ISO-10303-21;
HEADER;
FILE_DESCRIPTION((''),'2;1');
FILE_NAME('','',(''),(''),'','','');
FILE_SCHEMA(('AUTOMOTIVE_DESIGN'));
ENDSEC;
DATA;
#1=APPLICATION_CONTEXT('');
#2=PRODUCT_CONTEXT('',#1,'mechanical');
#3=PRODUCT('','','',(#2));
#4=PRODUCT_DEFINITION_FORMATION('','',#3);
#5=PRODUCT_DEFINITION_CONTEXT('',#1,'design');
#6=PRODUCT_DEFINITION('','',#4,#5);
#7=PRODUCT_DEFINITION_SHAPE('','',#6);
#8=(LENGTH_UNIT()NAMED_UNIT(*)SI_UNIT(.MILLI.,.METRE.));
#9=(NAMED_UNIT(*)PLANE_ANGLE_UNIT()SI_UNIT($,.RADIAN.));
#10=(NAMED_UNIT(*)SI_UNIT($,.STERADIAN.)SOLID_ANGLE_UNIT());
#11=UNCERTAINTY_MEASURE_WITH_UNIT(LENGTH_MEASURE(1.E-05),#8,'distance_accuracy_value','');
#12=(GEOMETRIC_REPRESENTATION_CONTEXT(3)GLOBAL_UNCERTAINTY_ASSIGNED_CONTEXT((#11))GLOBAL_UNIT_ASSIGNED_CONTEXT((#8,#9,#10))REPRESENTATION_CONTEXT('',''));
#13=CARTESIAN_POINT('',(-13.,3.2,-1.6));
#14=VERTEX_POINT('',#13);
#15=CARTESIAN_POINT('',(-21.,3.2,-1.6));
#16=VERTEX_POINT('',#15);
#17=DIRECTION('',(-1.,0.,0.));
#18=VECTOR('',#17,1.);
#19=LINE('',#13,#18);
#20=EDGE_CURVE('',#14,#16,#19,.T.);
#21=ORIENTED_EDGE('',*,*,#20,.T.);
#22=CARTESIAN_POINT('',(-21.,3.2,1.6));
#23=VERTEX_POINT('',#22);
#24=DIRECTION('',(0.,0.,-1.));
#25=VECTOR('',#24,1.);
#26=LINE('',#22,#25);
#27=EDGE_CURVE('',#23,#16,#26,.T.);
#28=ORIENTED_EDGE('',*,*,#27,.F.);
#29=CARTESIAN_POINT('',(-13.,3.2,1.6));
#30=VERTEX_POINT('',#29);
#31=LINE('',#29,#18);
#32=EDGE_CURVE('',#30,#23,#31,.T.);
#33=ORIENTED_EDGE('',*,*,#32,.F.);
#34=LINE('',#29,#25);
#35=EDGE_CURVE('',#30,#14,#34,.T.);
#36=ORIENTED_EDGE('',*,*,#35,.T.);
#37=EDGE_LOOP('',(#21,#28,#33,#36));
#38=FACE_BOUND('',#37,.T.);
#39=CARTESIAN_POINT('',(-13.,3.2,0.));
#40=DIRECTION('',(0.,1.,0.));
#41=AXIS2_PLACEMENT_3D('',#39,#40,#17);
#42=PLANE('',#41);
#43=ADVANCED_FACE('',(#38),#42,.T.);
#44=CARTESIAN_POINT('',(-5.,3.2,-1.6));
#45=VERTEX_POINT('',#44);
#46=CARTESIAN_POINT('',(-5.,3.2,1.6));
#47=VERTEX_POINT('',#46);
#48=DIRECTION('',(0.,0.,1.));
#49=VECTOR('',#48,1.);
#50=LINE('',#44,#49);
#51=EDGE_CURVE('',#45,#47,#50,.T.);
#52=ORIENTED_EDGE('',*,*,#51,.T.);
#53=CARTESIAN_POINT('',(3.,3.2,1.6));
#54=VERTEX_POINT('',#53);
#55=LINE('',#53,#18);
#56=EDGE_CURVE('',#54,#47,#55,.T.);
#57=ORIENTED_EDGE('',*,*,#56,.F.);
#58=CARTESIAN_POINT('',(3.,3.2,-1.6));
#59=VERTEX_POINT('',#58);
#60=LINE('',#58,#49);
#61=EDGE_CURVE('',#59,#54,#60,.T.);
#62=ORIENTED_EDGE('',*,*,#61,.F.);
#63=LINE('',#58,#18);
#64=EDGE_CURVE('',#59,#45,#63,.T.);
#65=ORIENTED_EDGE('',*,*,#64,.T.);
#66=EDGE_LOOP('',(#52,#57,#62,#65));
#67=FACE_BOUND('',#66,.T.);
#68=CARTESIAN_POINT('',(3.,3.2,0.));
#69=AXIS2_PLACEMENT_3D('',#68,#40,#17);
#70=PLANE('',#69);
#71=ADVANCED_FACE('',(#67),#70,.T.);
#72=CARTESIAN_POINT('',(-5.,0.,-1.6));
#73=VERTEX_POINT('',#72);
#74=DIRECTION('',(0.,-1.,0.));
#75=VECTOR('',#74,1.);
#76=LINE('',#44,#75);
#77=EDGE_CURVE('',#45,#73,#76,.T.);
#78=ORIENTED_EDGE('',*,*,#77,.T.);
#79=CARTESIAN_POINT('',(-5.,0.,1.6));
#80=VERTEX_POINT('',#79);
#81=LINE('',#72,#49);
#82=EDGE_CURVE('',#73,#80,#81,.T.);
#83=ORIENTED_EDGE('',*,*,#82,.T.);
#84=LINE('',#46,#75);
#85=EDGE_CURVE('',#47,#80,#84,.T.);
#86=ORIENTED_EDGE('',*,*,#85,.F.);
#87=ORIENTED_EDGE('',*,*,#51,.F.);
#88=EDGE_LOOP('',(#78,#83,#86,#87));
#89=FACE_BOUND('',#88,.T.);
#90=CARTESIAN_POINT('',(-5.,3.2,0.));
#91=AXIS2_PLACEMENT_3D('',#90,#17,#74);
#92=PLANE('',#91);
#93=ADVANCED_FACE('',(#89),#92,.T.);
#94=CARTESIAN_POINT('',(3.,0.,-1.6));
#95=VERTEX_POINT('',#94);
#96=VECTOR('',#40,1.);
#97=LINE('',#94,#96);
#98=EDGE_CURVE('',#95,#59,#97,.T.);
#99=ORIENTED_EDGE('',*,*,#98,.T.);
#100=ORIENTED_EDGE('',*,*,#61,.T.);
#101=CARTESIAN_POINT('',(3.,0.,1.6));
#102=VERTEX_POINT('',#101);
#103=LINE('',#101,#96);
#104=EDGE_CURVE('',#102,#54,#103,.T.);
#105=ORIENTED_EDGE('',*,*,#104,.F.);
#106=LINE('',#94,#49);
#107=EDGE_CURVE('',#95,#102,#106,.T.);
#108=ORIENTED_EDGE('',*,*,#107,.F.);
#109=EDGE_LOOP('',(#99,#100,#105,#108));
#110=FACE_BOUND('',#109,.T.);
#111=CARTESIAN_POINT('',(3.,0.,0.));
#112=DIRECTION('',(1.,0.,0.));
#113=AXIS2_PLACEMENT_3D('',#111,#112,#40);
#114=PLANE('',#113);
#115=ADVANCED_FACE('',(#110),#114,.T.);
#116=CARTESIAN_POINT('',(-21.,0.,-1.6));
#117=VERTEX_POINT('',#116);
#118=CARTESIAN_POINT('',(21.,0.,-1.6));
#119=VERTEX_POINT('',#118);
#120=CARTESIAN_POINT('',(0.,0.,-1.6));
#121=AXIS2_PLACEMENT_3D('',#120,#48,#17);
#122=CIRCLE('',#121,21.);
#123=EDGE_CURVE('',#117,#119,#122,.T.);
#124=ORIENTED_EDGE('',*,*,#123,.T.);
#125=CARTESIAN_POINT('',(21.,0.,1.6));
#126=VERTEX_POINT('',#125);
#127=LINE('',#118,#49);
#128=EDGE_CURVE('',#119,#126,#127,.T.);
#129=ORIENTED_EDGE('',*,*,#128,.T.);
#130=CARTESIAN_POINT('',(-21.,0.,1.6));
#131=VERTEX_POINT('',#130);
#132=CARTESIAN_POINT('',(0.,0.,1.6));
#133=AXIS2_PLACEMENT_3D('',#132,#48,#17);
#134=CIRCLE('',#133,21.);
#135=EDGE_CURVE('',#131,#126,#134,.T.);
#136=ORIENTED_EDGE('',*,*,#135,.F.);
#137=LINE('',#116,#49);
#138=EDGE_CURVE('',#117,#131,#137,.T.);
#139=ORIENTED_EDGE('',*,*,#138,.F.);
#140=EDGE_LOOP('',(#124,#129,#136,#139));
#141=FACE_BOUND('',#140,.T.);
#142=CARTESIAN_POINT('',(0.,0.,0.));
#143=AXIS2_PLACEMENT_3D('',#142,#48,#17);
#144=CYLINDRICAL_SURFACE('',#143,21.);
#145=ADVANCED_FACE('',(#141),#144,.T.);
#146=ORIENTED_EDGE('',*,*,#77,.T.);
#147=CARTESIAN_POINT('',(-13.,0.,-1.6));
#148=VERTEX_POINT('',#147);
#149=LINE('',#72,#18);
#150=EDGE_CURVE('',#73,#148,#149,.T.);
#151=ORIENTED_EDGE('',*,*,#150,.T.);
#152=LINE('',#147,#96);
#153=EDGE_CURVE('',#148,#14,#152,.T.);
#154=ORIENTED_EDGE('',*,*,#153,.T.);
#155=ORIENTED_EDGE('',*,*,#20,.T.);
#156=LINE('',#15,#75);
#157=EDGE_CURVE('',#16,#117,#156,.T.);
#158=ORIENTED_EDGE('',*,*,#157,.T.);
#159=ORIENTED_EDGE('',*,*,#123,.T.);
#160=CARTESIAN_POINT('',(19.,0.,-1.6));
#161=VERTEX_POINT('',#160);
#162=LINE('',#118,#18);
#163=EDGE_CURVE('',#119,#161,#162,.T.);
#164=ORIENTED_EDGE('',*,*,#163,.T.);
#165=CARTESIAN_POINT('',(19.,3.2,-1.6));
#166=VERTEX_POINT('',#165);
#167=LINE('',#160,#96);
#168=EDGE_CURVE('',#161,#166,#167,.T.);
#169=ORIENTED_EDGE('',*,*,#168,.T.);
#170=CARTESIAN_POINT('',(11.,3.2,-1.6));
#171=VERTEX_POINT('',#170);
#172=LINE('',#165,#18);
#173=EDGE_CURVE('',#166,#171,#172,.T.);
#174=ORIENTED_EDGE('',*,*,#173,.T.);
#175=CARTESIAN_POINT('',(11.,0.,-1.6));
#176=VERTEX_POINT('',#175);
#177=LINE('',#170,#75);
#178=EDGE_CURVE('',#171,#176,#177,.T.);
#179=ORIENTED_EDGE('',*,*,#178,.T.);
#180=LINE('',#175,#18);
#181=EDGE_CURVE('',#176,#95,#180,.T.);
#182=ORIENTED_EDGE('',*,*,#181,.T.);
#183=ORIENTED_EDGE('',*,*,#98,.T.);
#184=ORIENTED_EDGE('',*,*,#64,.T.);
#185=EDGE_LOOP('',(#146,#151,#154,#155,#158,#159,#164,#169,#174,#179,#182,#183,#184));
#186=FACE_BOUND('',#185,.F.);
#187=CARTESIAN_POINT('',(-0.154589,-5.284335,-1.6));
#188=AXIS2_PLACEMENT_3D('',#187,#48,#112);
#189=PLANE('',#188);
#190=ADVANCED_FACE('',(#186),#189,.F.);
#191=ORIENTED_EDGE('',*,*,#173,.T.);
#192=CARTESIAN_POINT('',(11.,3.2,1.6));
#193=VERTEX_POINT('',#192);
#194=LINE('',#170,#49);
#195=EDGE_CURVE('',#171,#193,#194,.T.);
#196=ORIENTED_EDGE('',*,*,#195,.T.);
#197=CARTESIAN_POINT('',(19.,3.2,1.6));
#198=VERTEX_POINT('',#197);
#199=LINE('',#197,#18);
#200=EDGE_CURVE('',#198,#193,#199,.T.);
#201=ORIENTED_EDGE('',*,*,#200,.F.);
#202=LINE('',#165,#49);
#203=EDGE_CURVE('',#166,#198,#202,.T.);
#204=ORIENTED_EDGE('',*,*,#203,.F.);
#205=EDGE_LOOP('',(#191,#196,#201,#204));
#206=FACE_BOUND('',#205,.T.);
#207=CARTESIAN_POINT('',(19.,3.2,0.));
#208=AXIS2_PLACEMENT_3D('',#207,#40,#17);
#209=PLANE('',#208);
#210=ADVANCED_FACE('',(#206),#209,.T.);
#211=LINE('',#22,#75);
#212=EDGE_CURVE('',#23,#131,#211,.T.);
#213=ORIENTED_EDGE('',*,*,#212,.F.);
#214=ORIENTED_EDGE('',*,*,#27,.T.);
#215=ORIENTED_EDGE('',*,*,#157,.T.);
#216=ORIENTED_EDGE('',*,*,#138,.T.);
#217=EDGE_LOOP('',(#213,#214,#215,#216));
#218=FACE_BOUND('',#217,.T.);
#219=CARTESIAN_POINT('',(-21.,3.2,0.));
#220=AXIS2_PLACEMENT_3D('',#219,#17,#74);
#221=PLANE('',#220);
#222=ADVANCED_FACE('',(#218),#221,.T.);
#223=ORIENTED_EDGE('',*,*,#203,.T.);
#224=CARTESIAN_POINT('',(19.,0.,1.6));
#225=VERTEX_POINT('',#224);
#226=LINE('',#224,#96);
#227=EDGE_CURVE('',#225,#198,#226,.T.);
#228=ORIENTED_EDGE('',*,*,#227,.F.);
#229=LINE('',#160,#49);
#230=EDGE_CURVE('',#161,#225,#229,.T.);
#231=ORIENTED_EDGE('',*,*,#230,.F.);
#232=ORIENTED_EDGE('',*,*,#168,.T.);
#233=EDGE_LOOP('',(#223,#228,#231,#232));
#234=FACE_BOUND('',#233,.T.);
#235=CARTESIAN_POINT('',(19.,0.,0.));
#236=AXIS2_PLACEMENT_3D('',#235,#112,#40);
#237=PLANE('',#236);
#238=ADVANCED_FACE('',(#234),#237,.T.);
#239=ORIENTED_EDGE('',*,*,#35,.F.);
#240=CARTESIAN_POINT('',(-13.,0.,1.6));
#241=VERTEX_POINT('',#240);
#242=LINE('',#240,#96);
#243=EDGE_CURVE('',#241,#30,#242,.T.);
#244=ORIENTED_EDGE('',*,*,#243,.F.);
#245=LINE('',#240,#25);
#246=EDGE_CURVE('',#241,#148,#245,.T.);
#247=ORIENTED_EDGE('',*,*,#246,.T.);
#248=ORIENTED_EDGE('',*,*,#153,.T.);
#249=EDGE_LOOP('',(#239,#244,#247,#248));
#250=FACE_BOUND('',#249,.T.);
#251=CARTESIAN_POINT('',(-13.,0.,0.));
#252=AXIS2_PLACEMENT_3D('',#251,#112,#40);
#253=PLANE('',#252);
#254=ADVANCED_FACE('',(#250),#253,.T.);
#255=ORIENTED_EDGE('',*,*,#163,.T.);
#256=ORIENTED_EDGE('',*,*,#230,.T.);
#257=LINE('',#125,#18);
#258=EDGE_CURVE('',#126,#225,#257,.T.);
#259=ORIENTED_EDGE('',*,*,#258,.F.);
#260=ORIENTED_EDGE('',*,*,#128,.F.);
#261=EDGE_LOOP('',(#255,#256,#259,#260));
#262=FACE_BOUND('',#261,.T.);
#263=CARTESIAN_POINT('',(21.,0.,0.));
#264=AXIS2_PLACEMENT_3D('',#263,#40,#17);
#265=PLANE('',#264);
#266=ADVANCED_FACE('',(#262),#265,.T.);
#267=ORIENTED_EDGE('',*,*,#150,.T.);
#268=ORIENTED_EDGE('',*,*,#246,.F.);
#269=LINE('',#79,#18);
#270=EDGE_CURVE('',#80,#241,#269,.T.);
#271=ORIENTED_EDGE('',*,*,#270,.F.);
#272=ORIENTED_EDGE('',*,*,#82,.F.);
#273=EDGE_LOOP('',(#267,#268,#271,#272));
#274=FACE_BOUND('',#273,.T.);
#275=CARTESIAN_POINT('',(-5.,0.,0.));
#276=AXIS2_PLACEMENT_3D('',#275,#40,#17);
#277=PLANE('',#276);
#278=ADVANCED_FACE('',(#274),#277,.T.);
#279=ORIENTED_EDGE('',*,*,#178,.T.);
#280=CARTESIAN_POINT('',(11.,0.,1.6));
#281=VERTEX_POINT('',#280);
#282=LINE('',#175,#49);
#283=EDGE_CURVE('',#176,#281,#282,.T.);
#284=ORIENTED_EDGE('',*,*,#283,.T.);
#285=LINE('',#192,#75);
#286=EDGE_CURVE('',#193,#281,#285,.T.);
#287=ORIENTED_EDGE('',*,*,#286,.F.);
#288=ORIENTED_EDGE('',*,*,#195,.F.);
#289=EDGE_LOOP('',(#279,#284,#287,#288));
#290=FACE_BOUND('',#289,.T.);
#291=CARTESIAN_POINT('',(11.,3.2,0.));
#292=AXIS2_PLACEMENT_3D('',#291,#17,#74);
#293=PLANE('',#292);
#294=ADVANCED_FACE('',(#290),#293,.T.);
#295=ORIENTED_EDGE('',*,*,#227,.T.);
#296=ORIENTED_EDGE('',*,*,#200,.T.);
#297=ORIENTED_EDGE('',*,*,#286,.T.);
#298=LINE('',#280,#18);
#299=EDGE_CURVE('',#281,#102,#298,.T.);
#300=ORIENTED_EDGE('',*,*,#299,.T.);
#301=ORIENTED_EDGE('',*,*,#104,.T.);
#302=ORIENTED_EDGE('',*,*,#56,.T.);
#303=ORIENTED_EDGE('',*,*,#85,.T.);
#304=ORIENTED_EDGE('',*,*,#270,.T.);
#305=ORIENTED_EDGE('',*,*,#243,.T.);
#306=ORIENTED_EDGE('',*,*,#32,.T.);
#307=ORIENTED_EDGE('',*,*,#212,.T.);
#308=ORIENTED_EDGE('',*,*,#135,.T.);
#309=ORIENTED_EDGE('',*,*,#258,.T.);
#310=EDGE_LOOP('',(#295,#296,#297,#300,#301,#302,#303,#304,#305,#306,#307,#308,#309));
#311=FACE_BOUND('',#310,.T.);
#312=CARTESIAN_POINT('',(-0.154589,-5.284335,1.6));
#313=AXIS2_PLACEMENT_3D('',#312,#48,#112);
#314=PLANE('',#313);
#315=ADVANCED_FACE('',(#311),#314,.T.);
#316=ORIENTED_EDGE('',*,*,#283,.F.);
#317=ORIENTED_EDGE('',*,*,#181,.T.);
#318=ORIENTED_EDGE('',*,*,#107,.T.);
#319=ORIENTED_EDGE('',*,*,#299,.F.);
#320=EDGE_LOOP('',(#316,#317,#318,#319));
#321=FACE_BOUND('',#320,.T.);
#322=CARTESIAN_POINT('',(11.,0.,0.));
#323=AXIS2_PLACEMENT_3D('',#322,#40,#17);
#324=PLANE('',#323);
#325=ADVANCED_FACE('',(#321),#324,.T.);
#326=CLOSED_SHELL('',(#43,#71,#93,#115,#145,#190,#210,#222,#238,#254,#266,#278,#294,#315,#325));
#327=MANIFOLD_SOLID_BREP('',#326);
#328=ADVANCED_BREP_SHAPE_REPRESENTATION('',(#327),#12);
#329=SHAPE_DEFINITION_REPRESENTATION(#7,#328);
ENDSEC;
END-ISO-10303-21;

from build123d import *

# Parameters (mm, degrees)
F1_DEPTH = 1.6


# Not quite as in the source:
# - a feature names something its author has since deleted; it is built from what else it names


with BuildPart() as f1:
    # F0 (on Top) → F1 (new body, symmetric)
    with BuildSketch(Plane.XY):
        with BuildLine():
            Line((-21, 3.2), (-21, 0))
            ThreePointArc((-21, 0), (0, -21), (21, 0))
            Line((21, 0), (19, 0))
            Line((19, 0), (19, 3.2))
            Line((19, 3.2), (11, 3.2))
            Line((11, 3.2), (11, 0))
            Line((11, 0), (3, 0))
            Line((3, 0), (3, 3.2))
            Line((3, 3.2), (-5, 3.2))
            Line((-5, 3.2), (-5, 0))
            Line((-5, 0), (-13, 0))
            Line((-13, 0), (-13, 3.2))
            Line((-13, 3.2), (-21, 3.2))
        make_face()
    extrude(amount=F1_DEPTH, both=True)


solid = f1.part
